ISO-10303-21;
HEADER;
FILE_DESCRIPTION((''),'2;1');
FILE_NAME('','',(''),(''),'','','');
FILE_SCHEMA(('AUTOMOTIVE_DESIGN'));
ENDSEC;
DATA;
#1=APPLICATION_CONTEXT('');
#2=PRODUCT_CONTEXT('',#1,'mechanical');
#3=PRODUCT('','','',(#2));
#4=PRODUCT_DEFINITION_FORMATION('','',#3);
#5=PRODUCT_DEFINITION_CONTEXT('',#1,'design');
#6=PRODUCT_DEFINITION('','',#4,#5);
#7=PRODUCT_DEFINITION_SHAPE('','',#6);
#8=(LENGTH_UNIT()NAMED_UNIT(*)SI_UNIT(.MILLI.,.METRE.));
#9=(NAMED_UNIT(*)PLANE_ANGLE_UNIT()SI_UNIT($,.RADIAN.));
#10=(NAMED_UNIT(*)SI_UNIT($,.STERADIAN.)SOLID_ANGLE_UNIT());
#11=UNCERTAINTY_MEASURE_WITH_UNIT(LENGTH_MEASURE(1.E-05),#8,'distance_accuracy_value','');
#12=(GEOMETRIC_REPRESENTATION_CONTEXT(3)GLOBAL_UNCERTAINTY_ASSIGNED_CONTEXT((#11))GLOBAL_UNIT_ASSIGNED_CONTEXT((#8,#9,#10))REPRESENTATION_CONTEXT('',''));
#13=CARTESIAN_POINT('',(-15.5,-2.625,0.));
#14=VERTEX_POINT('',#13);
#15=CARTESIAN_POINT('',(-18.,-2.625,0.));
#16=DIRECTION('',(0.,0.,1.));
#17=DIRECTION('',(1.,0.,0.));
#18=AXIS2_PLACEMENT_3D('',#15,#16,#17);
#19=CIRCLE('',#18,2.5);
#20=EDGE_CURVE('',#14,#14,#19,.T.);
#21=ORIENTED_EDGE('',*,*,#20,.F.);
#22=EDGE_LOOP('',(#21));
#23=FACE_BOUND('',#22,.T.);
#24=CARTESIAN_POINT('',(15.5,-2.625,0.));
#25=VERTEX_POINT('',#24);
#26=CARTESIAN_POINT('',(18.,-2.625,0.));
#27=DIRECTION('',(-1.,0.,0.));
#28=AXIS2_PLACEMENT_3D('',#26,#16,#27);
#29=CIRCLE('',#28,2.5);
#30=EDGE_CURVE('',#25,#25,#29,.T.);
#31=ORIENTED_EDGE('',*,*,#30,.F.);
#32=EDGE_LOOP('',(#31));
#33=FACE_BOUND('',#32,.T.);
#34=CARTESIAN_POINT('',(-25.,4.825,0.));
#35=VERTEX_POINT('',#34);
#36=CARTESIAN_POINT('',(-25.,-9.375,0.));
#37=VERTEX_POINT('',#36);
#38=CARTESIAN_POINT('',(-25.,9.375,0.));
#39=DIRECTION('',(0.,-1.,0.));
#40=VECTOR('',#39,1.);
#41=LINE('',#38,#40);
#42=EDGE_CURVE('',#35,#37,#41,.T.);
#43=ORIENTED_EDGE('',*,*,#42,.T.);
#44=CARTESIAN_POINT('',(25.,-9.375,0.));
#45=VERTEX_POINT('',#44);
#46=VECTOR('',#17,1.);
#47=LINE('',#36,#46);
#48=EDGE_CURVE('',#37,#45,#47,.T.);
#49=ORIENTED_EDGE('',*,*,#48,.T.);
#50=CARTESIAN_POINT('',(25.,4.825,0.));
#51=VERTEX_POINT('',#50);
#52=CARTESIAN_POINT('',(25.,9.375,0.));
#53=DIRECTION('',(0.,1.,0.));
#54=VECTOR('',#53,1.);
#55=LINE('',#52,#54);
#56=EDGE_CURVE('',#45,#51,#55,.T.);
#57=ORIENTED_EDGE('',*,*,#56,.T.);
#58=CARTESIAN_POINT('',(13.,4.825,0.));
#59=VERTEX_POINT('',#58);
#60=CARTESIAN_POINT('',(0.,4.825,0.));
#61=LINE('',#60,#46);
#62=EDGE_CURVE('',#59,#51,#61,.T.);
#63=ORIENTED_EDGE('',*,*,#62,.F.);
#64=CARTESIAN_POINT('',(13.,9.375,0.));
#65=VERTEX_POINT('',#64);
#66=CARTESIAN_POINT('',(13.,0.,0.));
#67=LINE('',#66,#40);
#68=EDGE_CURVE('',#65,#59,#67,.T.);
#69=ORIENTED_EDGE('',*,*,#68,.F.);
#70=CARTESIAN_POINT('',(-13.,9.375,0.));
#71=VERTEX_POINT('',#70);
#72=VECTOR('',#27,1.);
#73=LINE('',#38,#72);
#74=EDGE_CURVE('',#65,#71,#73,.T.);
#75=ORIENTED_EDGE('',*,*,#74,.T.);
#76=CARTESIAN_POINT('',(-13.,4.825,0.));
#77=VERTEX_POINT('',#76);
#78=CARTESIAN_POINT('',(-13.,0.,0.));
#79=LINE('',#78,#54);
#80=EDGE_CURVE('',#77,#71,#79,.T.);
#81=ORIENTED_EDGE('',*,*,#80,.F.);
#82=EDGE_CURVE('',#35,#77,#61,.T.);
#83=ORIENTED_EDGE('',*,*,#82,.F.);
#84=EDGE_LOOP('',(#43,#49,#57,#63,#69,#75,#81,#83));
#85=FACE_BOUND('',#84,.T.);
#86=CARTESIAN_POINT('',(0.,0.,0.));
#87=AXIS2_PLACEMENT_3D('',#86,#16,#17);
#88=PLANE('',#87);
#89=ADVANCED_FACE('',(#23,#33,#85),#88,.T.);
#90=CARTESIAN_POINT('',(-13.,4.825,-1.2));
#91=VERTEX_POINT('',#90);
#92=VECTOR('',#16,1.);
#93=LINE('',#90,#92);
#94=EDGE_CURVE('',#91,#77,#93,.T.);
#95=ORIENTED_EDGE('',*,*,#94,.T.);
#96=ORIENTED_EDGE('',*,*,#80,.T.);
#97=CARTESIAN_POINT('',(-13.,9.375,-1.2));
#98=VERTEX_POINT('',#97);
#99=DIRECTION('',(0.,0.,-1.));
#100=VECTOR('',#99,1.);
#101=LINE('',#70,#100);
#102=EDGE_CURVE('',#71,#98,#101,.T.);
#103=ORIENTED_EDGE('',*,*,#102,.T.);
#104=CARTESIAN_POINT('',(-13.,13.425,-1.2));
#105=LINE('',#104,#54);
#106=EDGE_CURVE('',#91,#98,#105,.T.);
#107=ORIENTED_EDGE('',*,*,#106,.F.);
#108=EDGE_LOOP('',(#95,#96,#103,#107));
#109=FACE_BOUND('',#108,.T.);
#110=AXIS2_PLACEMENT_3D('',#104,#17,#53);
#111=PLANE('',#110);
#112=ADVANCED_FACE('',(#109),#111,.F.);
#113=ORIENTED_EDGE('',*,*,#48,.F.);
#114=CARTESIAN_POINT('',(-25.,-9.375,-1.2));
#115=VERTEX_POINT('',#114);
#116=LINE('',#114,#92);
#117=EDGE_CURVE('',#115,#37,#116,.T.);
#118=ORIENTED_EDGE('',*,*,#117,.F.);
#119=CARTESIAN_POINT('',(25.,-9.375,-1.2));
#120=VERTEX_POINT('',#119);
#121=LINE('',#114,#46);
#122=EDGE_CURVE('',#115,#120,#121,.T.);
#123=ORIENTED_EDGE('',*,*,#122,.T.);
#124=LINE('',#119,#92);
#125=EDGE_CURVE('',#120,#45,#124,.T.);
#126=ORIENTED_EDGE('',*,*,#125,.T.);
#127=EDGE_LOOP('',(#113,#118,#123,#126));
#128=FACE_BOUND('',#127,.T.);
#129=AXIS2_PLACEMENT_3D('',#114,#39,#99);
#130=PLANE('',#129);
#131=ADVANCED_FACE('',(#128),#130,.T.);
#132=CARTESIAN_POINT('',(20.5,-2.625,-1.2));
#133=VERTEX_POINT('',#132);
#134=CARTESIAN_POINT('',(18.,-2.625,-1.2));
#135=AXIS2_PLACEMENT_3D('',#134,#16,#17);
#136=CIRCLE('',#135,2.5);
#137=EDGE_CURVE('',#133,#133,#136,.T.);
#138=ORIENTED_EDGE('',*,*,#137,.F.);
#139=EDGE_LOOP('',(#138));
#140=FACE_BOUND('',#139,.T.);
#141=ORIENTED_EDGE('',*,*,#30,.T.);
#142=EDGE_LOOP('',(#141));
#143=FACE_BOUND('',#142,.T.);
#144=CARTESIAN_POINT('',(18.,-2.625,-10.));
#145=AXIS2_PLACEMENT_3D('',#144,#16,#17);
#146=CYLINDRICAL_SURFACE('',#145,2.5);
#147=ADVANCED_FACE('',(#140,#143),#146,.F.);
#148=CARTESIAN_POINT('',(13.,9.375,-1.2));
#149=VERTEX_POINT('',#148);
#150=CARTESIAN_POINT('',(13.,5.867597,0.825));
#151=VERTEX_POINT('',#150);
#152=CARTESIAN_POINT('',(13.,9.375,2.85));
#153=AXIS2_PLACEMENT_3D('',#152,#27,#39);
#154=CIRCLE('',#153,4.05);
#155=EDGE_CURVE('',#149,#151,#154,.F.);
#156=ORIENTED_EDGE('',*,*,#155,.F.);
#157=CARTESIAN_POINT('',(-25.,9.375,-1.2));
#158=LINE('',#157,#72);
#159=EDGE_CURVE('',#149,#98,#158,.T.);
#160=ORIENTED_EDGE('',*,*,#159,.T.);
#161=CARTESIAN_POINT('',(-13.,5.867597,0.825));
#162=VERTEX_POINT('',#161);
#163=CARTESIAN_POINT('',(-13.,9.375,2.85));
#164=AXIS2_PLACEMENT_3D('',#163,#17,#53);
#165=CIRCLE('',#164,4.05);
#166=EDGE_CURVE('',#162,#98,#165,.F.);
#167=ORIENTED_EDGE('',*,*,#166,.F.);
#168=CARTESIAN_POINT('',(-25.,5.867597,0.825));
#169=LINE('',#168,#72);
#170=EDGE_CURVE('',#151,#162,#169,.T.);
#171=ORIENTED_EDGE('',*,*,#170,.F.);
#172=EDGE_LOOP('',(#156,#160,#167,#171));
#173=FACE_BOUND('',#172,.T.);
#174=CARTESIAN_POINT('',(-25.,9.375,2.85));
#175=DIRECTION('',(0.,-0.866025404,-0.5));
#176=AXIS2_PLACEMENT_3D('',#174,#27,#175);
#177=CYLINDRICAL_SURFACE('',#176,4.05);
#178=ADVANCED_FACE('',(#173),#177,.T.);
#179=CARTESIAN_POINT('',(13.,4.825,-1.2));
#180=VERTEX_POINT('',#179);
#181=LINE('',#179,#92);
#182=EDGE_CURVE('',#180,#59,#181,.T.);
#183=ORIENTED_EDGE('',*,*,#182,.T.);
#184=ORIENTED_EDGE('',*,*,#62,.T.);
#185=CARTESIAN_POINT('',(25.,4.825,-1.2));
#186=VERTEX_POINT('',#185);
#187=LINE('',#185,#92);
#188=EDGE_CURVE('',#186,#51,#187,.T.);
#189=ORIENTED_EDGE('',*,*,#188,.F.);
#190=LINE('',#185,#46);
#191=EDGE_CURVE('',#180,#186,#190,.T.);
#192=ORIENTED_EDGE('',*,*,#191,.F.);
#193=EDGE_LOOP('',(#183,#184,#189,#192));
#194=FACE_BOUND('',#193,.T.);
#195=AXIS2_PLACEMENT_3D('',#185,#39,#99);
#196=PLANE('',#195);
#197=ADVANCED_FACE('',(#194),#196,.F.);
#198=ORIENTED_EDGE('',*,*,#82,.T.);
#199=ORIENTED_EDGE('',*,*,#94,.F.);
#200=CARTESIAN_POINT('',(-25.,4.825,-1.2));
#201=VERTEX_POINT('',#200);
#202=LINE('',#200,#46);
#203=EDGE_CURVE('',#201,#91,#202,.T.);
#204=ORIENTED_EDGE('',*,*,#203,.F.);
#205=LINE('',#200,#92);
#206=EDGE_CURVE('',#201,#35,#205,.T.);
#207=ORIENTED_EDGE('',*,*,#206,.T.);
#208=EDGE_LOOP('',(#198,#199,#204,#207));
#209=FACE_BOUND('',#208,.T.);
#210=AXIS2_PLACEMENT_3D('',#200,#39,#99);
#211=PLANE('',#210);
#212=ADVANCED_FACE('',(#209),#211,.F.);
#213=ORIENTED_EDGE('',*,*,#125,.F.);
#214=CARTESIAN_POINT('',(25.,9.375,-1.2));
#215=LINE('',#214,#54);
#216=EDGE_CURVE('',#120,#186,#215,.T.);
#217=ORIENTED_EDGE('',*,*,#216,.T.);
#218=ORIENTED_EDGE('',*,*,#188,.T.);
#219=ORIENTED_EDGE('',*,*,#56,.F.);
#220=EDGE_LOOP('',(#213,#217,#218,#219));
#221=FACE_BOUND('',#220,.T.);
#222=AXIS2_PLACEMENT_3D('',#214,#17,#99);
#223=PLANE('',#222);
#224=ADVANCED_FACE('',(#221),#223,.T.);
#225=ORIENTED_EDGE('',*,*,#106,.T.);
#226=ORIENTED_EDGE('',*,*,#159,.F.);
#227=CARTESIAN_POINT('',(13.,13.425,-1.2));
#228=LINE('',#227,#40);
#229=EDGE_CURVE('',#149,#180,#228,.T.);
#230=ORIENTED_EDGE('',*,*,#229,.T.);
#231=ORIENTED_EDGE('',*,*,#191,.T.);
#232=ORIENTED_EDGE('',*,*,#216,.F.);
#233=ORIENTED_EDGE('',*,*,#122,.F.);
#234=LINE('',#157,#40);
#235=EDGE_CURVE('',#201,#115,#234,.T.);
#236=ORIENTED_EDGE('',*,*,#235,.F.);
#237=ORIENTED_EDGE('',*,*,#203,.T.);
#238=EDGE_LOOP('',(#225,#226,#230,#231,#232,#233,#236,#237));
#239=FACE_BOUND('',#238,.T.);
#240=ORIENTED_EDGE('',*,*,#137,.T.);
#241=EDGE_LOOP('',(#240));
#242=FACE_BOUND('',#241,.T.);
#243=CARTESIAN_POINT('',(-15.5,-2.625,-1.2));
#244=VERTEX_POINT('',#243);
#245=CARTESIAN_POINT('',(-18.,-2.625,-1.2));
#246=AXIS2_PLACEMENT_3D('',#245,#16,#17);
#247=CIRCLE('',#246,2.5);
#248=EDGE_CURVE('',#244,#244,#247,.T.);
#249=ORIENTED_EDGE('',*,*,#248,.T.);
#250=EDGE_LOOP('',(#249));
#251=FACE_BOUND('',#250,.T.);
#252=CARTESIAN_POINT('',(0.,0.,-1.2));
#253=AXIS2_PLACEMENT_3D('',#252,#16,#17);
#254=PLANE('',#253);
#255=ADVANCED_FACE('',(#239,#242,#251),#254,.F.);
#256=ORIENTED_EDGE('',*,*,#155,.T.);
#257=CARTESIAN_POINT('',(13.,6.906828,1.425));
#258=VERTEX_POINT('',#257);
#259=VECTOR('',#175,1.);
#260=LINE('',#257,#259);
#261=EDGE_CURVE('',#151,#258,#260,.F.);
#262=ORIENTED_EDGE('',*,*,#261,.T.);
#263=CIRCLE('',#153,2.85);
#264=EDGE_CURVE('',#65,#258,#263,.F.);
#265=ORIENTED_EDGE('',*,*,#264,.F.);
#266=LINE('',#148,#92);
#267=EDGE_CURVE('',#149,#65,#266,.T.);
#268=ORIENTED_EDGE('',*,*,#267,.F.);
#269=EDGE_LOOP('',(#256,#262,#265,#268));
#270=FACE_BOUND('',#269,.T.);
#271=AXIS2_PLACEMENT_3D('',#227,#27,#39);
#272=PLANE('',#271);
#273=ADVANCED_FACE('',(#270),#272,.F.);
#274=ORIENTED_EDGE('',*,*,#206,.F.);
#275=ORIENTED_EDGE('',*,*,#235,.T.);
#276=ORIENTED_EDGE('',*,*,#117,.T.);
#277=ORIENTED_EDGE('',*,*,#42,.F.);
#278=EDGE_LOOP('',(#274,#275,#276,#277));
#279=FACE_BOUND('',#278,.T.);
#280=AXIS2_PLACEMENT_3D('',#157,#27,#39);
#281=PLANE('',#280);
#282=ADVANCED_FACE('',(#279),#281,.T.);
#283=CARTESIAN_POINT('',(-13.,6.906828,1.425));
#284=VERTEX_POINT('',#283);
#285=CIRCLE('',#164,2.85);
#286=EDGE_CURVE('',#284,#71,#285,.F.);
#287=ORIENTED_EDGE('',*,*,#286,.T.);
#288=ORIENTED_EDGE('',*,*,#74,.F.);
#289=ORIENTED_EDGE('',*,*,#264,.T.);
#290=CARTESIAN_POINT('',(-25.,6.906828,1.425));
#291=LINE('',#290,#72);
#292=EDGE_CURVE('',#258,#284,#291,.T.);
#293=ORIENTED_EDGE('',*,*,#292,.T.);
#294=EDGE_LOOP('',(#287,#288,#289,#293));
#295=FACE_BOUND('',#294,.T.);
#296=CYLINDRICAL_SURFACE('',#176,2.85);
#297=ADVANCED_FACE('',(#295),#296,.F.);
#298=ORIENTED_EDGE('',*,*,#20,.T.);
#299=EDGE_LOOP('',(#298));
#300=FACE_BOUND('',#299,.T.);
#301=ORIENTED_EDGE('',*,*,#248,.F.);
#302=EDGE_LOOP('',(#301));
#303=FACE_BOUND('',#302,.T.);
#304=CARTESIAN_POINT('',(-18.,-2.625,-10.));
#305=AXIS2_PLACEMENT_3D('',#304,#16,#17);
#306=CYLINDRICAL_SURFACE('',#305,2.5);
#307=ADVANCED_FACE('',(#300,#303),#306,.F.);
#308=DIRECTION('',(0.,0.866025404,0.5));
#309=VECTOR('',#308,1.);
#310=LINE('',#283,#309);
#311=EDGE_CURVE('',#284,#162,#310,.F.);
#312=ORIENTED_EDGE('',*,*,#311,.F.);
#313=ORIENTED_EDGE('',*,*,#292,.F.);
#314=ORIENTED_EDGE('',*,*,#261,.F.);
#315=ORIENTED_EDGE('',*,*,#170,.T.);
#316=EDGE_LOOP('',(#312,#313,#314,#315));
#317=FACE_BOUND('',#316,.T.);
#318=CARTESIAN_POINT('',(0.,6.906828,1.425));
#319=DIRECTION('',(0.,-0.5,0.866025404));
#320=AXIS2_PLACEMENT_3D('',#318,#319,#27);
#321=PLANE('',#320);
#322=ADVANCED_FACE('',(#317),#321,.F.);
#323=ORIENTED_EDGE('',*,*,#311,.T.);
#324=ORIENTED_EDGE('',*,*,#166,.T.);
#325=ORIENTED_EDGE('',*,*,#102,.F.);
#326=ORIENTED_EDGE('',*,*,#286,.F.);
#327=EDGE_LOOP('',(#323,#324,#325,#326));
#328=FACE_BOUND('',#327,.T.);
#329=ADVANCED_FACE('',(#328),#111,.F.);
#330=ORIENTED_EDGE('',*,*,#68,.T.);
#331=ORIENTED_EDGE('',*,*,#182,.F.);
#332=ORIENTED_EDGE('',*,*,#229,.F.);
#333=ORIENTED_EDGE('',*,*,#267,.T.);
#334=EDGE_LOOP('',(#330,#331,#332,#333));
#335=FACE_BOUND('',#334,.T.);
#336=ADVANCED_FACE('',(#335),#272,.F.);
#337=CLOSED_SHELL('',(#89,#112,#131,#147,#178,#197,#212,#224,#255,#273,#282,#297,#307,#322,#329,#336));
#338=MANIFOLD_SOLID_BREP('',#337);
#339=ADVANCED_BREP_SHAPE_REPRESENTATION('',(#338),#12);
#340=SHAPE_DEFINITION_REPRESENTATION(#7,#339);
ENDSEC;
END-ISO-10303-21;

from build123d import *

# Parameters (mm, degrees)
SKETCH_1_W               = 50
SKETCH_1_H               = 18.75
SM_BASE_FLANGE_1_DEPTH   = 1.2
OTHER_START              = -25
OTHER_1_DEPTH            = 50
SKETCH_12_R              = 2.5
CUT_EXTRUDE_3_DEPTH      = 10
CUT_EXTRUDE_1_DEPTH      = 30.203435157
CUT_EXTRUDE_1_DEPTH_BACK = 30.203435157
SKETCH_10_W              = 12
SKETCH_10_H              = 8.6


# Read off the part's stored shape, not the designer's step: 褶边1
# Sheet-metal steps are written as plain solids
with BuildPart() as part:
    # Sketch 1 → 基体-法兰1 (new body)
    with BuildSketch(Plane.XY):
        Rectangle(SKETCH_1_W, SKETCH_1_H)
    extrude(amount=-SM_BASE_FLANGE_1_DEPTH)

    # Other 1 outline → Other 1 (add)
    with BuildSketch(Plane.YZ.offset(OTHER_START)):
        with BuildLine():
            Line((5.867597115, 0.825), (6.906827599, 1.425))
            ThreePointArc((6.906827599, 1.425), (10.8, 5.318172401), (9.375, 0))
            Line((9.375, 0), (9.375, -1.2))
            ThreePointArc((9.375, -1.2), (11.4, 6.357402885), (5.867597115, 0.825))
        make_face()
    extrude(amount=OTHER_1_DEPTH)

    # 草图12 → 切除-拉伸3 (cut)
    with BuildSketch(Plane.XY):
        with Locations((-18, -2.625)):
            Circle(SKETCH_12_R)
        with Locations((18, -2.625)):
            Circle(SKETCH_12_R)
    extrude(amount=-CUT_EXTRUDE_3_DEPTH, mode=Mode.SUBTRACT)

    # 草图10 → 切除-拉伸1 (cut, two sides: drawn at the far end of the back side and taken through both)
    with BuildSketch(Plane.XY.offset(-CUT_EXTRUDE_1_DEPTH_BACK)):
        with Locations((-19, 9.125)):
            Rectangle(SKETCH_10_W, SKETCH_10_H)
        with Locations((19, 9.125)):
            Rectangle(SKETCH_10_W, SKETCH_10_H)
    extrude(amount=CUT_EXTRUDE_1_DEPTH + CUT_EXTRUDE_1_DEPTH_BACK, mode=Mode.SUBTRACT)


solid = part.part
